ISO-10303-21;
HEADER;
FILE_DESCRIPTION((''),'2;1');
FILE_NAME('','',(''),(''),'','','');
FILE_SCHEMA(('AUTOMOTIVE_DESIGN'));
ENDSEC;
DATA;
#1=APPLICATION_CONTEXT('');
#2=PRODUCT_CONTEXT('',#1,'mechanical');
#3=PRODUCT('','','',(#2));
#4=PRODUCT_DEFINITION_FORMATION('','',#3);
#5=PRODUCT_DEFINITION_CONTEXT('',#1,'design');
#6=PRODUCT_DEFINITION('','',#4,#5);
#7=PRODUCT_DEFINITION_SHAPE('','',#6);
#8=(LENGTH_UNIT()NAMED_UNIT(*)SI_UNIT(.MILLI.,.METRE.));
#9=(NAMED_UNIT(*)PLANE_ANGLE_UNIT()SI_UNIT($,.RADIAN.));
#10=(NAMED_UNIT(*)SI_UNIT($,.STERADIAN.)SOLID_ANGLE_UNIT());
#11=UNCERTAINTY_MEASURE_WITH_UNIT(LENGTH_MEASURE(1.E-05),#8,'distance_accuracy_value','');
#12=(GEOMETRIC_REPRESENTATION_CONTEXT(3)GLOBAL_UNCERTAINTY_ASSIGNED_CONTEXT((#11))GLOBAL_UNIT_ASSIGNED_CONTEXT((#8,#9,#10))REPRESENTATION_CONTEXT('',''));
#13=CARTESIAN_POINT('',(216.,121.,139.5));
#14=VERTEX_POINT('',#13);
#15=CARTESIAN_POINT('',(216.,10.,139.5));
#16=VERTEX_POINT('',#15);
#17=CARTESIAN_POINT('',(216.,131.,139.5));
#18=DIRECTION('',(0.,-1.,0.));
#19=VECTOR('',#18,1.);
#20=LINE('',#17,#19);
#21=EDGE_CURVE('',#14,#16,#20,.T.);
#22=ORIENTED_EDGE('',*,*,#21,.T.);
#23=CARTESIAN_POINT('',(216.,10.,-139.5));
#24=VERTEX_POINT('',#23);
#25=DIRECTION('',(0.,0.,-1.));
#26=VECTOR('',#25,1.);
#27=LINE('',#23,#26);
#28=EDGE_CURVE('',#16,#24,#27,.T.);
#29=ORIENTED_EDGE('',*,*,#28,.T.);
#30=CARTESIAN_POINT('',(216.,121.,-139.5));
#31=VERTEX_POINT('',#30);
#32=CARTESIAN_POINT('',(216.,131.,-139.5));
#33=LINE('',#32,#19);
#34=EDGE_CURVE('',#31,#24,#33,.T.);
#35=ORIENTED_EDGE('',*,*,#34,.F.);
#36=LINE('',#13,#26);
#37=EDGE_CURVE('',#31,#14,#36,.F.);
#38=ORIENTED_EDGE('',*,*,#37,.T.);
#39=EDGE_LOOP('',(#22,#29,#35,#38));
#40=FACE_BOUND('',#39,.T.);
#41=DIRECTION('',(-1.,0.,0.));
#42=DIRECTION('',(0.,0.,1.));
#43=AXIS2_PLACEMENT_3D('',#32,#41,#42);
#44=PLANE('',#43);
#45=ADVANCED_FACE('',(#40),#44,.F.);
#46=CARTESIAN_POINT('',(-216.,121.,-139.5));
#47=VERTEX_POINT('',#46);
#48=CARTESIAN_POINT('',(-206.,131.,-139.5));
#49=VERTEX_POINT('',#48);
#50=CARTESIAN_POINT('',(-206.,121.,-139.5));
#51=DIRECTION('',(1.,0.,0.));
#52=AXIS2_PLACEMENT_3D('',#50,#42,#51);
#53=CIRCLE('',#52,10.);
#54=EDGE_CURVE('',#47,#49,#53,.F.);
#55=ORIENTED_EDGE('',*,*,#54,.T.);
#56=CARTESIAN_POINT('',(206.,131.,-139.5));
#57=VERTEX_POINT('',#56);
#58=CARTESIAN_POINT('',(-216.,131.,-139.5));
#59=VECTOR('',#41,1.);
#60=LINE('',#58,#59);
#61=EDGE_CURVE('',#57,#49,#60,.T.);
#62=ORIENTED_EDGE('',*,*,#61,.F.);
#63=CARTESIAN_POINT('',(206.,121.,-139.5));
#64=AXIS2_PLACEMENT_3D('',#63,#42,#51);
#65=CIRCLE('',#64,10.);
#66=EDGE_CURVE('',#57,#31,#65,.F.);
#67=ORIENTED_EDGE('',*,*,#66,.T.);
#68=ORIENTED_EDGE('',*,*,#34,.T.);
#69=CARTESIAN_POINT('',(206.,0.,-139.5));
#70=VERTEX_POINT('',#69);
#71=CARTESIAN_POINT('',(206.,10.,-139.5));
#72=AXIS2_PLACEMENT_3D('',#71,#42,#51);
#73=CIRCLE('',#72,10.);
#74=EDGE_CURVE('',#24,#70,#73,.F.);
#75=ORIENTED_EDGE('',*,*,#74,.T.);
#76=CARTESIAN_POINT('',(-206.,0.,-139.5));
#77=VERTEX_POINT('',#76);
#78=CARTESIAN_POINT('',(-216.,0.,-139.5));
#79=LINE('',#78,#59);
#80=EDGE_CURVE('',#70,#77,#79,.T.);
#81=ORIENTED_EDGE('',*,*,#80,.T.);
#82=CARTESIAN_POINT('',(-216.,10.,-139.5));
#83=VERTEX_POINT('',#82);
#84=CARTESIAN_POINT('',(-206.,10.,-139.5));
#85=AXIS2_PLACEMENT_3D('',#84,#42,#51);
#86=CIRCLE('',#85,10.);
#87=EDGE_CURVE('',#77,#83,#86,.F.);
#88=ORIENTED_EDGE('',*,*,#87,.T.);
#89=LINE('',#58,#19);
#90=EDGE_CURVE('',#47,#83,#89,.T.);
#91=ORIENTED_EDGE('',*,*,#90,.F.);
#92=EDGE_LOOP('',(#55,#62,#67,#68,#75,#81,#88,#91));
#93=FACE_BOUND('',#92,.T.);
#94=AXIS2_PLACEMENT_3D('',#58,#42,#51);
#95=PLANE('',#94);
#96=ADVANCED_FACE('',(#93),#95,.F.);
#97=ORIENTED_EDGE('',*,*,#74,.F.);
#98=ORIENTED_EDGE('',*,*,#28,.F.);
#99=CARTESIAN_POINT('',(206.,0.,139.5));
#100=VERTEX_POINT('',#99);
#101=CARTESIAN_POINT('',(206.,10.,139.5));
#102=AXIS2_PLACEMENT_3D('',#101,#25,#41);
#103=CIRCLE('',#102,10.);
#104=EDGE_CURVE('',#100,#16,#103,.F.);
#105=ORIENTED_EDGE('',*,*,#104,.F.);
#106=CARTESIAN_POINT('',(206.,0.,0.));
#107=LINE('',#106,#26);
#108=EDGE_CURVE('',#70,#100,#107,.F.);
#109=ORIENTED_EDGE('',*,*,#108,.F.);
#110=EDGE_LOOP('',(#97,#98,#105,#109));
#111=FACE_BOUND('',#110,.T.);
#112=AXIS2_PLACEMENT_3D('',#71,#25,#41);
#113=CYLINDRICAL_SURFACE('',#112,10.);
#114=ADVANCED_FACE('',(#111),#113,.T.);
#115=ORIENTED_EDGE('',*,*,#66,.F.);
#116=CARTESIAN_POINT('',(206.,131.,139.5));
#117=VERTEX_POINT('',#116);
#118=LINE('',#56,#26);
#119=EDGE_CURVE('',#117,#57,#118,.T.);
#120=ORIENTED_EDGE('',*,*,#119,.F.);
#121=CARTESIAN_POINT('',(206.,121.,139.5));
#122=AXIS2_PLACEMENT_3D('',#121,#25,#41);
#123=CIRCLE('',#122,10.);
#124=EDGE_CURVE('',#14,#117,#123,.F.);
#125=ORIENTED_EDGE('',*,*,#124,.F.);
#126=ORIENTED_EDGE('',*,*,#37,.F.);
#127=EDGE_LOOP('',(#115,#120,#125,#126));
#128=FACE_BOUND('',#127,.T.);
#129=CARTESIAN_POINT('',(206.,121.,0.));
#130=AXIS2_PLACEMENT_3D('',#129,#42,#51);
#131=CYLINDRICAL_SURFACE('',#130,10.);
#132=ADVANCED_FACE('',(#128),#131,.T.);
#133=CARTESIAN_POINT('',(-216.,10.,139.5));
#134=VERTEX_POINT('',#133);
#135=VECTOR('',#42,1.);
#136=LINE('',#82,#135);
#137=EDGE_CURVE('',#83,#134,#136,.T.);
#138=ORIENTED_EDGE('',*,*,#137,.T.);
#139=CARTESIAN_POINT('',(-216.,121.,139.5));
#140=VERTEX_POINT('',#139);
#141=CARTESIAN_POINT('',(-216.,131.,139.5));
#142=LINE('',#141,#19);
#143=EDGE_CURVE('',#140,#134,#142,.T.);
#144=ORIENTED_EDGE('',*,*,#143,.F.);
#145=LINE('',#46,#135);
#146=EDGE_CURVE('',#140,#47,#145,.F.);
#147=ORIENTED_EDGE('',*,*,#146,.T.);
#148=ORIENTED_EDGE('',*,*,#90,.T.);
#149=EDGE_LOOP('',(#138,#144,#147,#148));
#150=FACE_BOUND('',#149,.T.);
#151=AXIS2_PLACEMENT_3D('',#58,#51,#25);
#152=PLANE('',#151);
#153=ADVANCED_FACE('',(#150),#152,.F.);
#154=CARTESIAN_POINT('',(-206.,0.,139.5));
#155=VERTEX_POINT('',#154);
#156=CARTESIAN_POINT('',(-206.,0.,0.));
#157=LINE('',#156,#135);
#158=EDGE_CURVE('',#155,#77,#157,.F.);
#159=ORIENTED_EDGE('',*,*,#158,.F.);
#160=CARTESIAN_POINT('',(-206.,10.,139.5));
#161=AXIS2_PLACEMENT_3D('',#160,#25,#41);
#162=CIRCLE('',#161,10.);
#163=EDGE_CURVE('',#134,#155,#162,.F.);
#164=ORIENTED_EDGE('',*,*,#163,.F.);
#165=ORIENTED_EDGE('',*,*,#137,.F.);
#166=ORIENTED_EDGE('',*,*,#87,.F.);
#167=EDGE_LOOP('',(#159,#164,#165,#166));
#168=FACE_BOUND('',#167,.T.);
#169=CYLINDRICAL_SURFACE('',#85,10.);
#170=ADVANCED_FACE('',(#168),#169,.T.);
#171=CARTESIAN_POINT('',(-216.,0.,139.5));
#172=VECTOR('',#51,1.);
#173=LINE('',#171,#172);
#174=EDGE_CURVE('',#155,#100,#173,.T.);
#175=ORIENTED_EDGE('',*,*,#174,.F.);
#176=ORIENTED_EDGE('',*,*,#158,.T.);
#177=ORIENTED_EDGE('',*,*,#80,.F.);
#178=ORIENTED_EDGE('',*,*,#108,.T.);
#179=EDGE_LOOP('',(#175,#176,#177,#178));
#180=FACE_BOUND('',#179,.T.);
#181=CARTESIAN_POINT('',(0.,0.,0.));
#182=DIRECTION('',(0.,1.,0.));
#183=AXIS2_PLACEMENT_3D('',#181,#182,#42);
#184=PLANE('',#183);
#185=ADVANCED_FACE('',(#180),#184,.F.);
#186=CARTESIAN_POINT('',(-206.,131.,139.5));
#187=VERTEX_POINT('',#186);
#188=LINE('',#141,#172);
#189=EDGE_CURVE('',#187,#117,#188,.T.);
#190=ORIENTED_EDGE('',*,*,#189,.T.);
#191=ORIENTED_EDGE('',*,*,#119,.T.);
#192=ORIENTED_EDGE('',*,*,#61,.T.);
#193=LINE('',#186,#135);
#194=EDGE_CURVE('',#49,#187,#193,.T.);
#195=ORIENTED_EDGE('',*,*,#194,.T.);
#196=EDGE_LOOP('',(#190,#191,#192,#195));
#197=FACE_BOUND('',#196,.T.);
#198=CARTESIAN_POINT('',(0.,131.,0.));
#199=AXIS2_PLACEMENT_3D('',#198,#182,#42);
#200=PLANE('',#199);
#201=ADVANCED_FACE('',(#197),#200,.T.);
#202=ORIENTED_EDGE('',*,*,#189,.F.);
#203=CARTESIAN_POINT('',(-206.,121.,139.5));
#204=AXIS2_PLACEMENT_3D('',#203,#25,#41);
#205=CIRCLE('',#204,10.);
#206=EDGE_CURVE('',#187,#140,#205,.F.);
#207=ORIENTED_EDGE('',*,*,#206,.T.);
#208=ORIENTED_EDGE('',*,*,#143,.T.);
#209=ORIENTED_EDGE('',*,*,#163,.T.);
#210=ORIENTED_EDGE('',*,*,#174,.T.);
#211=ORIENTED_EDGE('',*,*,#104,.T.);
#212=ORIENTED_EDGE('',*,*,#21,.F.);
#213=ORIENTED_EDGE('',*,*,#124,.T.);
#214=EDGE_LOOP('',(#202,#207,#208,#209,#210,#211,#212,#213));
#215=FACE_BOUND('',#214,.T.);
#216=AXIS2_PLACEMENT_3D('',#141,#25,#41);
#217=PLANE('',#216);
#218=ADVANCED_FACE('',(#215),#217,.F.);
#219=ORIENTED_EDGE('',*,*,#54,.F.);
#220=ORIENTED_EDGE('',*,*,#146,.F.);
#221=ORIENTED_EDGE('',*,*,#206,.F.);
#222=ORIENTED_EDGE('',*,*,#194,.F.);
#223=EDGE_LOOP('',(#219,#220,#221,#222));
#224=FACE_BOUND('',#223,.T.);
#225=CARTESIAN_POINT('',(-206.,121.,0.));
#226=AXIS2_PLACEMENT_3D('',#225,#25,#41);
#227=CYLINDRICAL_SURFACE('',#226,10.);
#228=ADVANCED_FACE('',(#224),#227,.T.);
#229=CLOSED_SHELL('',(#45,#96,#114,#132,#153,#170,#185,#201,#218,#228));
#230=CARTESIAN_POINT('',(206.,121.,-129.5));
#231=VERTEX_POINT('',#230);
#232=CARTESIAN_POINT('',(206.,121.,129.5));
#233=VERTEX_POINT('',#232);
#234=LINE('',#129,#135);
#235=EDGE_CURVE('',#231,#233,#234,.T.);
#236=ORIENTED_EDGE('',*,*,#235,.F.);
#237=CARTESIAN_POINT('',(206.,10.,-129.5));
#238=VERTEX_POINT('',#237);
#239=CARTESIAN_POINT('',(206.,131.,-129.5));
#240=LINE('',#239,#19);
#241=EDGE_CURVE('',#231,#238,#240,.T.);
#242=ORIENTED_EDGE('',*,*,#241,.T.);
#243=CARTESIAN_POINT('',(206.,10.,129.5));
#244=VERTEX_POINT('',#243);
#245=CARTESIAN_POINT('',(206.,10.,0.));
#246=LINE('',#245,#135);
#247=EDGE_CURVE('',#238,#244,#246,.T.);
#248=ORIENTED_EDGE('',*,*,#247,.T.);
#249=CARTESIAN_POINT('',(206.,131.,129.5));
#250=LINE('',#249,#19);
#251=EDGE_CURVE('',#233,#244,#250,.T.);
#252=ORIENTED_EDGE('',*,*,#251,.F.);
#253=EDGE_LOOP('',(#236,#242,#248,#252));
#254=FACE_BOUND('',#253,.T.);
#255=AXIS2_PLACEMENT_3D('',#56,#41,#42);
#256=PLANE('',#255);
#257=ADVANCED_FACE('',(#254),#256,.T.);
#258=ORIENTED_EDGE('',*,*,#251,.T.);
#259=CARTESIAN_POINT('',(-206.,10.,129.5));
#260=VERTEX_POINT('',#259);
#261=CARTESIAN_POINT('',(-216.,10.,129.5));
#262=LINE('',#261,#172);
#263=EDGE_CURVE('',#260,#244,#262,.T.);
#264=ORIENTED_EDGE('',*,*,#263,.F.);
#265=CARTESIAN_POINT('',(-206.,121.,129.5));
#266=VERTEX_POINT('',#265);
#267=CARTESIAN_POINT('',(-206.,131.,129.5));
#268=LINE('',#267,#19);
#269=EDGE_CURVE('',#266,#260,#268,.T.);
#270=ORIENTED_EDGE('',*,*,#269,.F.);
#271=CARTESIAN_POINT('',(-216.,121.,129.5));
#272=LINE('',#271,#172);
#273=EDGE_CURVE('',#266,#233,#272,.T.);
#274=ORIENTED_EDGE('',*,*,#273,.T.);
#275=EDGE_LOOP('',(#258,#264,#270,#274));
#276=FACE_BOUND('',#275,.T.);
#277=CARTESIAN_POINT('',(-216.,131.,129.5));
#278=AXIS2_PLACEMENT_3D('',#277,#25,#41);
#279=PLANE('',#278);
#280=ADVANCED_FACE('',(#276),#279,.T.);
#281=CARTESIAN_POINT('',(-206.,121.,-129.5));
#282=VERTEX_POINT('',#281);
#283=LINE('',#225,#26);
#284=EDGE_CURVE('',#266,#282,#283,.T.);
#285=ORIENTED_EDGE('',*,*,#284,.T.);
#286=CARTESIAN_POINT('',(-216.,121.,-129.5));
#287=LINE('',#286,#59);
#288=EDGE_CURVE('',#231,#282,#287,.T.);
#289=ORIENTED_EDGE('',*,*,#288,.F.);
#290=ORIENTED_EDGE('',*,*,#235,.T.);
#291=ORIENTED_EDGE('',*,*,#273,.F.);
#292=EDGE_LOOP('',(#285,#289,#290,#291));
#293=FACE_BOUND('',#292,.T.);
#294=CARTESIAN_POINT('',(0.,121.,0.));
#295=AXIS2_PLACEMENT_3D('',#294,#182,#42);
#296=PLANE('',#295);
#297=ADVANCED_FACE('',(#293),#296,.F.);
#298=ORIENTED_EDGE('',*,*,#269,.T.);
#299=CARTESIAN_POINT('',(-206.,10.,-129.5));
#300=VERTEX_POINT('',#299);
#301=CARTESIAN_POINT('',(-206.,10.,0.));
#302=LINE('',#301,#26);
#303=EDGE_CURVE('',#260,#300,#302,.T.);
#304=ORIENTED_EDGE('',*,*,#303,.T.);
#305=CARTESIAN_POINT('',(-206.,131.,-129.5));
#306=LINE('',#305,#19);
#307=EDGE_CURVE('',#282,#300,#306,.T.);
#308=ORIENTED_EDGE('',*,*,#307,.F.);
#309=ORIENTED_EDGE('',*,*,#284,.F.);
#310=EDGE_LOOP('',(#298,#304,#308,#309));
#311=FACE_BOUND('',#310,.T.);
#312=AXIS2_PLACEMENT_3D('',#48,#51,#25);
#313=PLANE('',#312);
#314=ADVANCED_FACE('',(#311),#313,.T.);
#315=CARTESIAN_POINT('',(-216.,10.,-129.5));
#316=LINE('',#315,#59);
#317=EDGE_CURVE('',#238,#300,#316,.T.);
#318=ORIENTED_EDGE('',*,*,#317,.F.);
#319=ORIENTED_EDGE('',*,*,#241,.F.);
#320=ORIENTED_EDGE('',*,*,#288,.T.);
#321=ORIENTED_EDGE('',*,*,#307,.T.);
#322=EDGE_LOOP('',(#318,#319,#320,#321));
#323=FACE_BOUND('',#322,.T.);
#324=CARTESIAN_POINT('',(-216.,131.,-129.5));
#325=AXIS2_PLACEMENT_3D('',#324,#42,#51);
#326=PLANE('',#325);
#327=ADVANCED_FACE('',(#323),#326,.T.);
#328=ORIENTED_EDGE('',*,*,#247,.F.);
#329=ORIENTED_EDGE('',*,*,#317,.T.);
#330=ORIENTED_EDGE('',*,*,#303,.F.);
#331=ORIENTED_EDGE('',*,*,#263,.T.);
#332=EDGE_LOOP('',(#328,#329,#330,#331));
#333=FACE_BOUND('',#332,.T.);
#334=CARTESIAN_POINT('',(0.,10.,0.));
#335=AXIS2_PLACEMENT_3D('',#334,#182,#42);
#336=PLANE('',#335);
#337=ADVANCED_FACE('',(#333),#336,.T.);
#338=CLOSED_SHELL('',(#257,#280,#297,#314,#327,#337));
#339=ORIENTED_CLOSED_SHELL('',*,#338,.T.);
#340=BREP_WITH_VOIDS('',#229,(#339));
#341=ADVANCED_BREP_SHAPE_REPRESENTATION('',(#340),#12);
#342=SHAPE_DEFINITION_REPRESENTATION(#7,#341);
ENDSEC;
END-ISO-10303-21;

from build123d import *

# Parameters (mm, degrees)
ESQUISSE1_W        = 432
ESQUISSE1_H        = 279
BOSS_EXTRU_1_DEPTH = 131
CONG_1_R           = 10
COQUE1_START       = -206
COQUE1_OUTLINE_W   = 111
COQUE1_OUTLINE_H   = 259
COQUE1_DEPTH       = 412


# Read off the part's stored shape, not the designer's step: Coque1
with BuildPart() as part:
    # Esquisse1 → Boss.-Extru.1 (new body)
    with BuildSketch(Plane(origin=(0, 0, 0), x_dir=(1, 0, 0), z_dir=(0, 1, 0))):
        Rectangle(ESQUISSE1_W, ESQUISSE1_H)
    extrude(amount=BOSS_EXTRU_1_DEPTH)

    # Congé1
    cong_1_edges = [part.edges().sort_by_distance(p)[0] for p in [
        (-216, 131, 0),
        (216, 131, 0),
        (-216, 0, 0),
        (216, 0, 0),
    ]]
    fillet(cong_1_edges, radius=CONG_1_R)

    # Coque1 outline → Coque1 (cut)
    with BuildSketch(Plane.YZ.offset(COQUE1_START)):
        with Locations((65.5, 0)):
            Rectangle(COQUE1_OUTLINE_W, COQUE1_OUTLINE_H)
    extrude(amount=COQUE1_DEPTH, mode=Mode.SUBTRACT)


solid = part.part
